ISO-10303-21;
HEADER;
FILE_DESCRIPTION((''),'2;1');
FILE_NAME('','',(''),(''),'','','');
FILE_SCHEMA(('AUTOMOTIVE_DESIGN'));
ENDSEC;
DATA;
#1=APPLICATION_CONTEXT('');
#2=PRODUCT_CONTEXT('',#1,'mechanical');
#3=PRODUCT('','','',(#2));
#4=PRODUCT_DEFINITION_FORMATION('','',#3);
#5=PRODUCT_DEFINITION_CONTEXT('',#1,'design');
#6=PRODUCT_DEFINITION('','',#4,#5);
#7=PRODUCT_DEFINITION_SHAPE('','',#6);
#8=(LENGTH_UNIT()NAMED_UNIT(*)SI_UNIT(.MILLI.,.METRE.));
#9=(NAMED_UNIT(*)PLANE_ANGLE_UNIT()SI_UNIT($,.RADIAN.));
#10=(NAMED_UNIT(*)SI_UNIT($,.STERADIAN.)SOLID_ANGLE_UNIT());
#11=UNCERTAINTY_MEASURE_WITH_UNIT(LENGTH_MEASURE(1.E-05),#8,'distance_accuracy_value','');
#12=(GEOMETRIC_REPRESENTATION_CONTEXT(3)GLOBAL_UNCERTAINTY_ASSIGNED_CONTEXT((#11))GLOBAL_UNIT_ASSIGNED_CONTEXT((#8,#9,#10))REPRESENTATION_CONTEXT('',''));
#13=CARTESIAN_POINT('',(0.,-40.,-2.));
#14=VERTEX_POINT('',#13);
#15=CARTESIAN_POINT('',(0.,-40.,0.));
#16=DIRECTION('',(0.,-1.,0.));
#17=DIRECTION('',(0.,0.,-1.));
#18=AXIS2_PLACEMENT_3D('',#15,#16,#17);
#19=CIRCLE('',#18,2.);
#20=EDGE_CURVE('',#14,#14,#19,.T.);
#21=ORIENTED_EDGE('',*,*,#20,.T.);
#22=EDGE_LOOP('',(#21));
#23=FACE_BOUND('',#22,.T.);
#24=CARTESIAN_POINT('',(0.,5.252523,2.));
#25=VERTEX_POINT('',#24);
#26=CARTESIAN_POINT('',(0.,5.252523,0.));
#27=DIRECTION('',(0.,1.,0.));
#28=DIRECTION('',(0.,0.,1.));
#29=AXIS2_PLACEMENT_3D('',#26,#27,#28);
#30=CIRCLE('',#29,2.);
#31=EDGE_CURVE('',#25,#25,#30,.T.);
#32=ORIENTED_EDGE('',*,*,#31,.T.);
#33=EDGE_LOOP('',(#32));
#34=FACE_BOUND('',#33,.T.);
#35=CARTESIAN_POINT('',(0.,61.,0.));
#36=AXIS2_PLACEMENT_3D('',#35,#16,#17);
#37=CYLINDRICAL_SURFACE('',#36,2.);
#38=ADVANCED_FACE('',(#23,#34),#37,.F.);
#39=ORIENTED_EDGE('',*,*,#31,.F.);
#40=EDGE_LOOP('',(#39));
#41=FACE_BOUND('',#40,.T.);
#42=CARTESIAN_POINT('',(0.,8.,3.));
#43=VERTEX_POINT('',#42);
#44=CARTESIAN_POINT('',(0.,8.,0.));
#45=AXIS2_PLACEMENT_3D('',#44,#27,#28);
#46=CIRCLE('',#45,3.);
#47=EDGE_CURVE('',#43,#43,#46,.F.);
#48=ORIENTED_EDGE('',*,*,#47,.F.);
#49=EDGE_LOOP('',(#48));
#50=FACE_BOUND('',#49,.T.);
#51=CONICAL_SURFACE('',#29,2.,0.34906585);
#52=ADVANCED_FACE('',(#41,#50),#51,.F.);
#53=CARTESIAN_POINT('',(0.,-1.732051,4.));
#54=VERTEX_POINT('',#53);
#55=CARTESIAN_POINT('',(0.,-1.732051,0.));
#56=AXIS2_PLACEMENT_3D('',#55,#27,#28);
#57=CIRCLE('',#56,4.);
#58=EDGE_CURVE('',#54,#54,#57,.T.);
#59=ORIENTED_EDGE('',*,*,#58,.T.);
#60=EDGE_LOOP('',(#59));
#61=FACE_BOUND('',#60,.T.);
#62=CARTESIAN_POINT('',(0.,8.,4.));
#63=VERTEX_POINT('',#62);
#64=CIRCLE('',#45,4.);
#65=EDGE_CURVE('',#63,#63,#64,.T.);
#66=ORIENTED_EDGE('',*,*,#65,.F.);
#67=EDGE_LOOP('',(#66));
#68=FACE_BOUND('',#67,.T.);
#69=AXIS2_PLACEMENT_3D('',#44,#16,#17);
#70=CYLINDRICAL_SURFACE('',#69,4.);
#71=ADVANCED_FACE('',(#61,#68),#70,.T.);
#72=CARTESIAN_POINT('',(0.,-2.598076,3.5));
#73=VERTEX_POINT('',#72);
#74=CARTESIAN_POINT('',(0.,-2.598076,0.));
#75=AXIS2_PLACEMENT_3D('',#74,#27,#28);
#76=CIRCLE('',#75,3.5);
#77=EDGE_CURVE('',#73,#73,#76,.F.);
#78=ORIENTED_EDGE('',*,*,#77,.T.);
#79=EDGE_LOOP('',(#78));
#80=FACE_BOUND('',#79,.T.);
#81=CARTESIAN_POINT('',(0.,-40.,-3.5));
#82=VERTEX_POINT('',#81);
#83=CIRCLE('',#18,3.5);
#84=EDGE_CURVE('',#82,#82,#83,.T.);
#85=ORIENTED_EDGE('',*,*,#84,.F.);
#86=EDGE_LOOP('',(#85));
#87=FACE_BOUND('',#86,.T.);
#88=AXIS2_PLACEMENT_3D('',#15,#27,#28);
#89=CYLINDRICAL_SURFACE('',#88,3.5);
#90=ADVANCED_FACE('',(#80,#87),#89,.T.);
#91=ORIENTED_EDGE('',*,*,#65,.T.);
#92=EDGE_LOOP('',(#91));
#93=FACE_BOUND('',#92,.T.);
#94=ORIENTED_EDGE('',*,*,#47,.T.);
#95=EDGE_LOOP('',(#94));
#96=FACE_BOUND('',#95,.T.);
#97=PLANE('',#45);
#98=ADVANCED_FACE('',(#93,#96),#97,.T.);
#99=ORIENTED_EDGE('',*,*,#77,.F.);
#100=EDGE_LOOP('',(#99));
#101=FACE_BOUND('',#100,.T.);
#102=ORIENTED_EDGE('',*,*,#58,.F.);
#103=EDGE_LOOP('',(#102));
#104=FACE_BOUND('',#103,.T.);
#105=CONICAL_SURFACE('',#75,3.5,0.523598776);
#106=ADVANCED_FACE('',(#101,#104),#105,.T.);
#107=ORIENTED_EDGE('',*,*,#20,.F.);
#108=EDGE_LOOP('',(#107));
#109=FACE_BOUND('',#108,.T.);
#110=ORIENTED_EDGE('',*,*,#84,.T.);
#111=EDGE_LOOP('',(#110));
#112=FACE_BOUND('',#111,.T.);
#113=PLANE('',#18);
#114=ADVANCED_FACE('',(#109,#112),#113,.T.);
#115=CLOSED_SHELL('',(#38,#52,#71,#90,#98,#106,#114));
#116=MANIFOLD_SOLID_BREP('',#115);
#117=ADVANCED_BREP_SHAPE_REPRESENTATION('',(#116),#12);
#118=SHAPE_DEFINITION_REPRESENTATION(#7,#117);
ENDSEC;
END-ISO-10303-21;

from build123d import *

# Parameters (mm, degrees)
SKETCH_1_R          = 4
EXTRUDE_1_DEPTH     = 8
SKETCH_2_R          = 3.5
EXTRUDE_2_DEPTH     = 40
CHAMFER_1_SIZE      = 1.5
CHAMFER_1_SIZE_2    = 2.598076211
SKETCH_3_R          = 2
CUT_EXTRUDE_1_DEPTH = 101
CHAMFER_2_SIZE      = 1
CHAMFER_2_SIZE2     = 2.747477419


with BuildPart() as part:
    # 草图1 → 凸台-拉伸1 (new body)
    with BuildSketch(Plane(origin=(0, 0, 0), x_dir=(1, 0, 0), z_dir=(0, 1, 0))):
        with Locations(Location((0, 0, 0), (0, 0, 270))):
            Circle(SKETCH_1_R)
    extrude(amount=EXTRUDE_1_DEPTH)

    # 草图2 → 凸台-拉伸2 (add)
    with BuildSketch(Plane.XZ):
        with Locations(Location((0, 0, 0), (0, 0, 270))):
            Circle(SKETCH_2_R)
    extrude(amount=EXTRUDE_2_DEPTH)

    # 倒角1
    # the kernel refuses this chamfer: 2.598076211, 1.5 mm, written as the material it adds along each edge
    with BuildSketch(Plane(origin=(0, 0, 0), x_dir=(0, 0, -1), z_dir=(-1, 0, 0))) as chamfer_1_piece_1_section:
        Polygon((3.5 + CHAMFER_1_SIZE, 0), (3.5, CHAMFER_1_SIZE_2), (3.5, 0), align=None)
    chamfer_1_piece_1 = revolve(axis=Axis((0, 0, 0), (0, -1, 0)), mode=Mode.PRIVATE)
    chamfer_1_piece_1 = chamfer_1_piece_1 & Plane(origin=(0, -2.194625368, 0), x_dir=(0, 0, 1), z_dir=(0, -1, 0)) * Cylinder(4, 20, mode=Mode.PRIVATE)
    add(chamfer_1_piece_1)

    # 草图3 → 切除-拉伸1 (cut)
    with BuildSketch(Plane.XZ.offset(40)):
        with Locations(Location((0, 0, 0), (0, 0, 270))):
            Circle(SKETCH_3_R)
    extrude(amount=-CUT_EXTRUDE_1_DEPTH, mode=Mode.SUBTRACT)

    # 倒角2
    chamfer_2_edges = [part.edges().sort_by_distance(p)[0] for p in [
        (0, 8, 2),
    ]]
    chamfer_2_side = [part.faces().sort_by_distance(p)[0] for p in [
        (0, 8, -3.886862915),
    ]]
    chamfer(chamfer_2_edges, length=CHAMFER_2_SIZE, length2=CHAMFER_2_SIZE2, reference=chamfer_2_side[0])


solid = part.part
